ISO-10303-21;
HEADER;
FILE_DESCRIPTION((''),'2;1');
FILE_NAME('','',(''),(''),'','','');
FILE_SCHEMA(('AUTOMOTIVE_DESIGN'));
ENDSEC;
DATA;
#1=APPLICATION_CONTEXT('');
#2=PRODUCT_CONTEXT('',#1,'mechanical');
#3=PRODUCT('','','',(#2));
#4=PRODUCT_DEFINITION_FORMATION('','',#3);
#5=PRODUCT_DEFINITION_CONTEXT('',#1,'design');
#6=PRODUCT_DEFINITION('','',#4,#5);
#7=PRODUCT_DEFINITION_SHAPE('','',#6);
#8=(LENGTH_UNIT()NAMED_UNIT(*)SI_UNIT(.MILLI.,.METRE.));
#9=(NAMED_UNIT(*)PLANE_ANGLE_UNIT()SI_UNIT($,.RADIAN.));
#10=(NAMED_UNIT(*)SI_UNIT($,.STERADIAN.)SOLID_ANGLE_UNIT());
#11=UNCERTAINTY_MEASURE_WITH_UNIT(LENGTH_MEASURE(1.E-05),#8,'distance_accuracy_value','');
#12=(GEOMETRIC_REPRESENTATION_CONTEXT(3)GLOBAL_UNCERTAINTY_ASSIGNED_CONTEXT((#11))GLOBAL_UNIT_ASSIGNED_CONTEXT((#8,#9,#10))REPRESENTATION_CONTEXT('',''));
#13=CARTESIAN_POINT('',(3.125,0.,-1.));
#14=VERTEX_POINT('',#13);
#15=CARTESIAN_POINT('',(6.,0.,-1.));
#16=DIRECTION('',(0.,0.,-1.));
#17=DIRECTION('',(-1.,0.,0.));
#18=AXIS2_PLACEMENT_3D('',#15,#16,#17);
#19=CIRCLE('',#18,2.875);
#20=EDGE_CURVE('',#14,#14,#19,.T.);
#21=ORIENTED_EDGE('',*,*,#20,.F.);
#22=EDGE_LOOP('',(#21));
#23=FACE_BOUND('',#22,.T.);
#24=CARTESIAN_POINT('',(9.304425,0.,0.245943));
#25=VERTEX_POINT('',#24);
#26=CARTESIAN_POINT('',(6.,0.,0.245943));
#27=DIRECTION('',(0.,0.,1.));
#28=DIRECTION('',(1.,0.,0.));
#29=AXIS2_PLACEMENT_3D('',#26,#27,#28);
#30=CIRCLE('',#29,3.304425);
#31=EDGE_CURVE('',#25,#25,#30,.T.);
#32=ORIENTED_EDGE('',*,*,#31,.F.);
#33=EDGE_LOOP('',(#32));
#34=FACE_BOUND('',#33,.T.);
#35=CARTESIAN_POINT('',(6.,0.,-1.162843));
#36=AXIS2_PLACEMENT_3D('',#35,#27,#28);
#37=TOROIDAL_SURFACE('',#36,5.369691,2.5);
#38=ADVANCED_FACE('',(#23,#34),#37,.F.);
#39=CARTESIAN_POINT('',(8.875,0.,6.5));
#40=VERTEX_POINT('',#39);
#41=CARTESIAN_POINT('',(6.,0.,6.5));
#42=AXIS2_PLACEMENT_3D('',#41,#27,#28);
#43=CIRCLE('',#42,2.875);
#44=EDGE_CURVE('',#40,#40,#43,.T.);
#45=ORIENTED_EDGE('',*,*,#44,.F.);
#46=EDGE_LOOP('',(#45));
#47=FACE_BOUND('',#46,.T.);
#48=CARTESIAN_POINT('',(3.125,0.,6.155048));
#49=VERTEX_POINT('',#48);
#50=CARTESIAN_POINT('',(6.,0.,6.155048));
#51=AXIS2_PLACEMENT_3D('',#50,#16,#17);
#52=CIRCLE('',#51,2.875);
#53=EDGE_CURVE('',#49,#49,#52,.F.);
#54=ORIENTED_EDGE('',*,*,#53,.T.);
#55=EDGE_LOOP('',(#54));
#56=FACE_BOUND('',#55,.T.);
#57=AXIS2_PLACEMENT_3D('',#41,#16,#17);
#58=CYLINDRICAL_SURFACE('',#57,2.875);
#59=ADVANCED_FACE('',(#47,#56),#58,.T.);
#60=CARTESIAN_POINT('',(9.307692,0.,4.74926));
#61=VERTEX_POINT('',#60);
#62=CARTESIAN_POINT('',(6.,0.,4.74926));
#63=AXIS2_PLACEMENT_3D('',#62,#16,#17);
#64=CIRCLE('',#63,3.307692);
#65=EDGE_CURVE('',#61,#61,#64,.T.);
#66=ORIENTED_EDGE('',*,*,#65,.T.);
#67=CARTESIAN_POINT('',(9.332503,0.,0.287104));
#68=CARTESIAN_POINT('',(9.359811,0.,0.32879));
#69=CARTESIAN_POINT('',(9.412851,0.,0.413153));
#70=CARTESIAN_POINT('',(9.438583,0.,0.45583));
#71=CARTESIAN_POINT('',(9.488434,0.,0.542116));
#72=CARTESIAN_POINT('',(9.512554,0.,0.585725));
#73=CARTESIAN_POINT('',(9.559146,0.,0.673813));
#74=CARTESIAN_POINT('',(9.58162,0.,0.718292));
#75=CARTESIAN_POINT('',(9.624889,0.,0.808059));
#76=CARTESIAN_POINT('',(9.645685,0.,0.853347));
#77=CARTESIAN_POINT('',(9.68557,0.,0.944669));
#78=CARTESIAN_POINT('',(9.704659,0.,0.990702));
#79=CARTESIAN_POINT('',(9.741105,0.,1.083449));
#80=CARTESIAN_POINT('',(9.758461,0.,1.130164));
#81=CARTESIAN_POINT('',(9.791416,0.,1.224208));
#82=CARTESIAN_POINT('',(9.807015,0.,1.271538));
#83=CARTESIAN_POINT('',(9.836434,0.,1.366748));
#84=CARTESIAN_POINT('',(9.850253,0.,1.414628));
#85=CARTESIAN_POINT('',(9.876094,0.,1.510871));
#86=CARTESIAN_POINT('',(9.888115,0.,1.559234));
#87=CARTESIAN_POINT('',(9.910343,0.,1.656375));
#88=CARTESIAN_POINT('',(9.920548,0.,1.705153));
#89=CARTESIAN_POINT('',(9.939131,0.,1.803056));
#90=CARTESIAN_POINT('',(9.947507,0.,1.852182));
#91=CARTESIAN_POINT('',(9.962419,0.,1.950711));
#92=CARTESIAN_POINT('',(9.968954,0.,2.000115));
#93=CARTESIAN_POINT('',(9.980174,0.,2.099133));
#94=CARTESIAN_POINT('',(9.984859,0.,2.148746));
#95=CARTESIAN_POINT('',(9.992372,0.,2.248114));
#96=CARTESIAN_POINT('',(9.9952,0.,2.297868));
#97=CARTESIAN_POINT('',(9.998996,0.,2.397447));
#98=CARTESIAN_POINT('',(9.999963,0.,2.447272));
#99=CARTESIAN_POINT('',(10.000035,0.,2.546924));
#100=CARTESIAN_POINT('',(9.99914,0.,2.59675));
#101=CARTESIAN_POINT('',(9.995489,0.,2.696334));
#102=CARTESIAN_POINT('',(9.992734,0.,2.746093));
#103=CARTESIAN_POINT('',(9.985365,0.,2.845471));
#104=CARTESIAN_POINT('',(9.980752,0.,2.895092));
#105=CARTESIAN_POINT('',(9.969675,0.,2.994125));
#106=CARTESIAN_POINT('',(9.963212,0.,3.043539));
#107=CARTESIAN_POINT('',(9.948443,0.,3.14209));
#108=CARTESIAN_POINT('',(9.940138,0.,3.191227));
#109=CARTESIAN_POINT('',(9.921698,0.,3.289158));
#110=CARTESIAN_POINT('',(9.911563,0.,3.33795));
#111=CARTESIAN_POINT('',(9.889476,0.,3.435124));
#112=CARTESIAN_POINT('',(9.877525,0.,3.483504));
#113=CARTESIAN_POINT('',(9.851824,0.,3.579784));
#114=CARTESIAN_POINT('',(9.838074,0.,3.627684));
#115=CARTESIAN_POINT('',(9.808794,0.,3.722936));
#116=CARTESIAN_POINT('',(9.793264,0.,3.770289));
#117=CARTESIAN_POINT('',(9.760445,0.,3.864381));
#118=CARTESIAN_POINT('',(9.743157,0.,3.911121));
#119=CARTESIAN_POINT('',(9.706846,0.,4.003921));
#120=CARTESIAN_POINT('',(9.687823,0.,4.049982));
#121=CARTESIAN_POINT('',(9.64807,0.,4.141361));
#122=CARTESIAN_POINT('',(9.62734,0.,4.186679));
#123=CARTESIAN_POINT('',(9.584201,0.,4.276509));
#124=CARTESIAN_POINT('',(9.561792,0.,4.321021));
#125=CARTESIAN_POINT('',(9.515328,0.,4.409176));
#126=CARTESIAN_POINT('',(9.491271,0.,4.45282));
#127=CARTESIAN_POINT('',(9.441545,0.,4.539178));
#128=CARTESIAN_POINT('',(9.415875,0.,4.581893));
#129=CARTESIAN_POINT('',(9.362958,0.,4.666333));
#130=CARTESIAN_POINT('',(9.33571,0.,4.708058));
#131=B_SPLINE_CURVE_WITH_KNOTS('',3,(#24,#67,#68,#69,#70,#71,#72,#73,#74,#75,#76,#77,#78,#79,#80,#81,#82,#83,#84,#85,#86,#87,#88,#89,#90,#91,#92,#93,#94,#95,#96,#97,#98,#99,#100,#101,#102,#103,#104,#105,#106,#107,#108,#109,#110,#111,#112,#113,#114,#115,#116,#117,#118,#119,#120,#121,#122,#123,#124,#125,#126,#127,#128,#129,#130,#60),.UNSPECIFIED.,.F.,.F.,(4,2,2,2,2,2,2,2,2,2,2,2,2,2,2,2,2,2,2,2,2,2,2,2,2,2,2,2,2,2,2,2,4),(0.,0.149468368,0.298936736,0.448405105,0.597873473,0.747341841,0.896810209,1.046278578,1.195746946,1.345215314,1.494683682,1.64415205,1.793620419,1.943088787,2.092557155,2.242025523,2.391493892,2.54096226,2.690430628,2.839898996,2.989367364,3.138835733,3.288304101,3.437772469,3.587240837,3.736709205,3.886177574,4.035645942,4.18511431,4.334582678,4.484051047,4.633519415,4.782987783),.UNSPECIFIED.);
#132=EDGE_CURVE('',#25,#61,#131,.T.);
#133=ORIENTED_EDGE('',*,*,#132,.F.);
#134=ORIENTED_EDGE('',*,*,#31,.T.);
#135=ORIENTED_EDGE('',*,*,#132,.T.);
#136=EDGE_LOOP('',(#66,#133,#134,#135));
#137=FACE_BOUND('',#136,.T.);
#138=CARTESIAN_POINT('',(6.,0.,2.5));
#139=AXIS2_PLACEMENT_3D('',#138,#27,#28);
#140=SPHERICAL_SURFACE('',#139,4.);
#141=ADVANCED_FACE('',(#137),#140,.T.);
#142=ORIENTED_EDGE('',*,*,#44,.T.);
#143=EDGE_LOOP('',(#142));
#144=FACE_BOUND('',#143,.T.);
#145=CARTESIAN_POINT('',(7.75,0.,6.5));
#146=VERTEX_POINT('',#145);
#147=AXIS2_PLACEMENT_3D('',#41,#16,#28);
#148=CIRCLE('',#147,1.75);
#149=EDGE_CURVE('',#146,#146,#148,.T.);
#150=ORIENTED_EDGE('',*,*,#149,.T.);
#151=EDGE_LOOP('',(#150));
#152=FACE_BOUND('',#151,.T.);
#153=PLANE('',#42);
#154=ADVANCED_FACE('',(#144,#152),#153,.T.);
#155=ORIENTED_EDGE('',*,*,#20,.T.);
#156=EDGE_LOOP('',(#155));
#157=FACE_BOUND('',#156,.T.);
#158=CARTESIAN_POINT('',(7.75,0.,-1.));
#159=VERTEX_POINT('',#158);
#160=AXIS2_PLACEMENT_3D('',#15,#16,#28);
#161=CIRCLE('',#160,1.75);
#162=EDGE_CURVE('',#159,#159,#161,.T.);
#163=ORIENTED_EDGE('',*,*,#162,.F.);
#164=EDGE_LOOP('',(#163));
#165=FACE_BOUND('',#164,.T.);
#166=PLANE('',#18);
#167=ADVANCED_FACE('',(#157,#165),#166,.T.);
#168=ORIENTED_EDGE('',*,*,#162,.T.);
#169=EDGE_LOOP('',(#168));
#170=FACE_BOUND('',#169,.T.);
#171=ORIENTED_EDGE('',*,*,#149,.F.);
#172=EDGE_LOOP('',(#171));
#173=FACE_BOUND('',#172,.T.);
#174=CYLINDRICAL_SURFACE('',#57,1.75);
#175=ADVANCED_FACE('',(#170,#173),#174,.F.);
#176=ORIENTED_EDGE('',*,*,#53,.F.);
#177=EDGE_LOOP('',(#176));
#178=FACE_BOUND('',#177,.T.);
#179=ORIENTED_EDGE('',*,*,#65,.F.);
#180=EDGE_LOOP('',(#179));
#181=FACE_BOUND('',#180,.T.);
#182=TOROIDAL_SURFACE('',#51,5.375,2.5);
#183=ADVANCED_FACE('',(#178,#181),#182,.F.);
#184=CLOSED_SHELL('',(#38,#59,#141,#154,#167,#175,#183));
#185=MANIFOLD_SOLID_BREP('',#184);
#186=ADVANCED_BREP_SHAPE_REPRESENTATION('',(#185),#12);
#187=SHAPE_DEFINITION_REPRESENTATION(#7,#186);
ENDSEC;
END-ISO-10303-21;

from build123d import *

# Parameters (mm, degrees)
SKETCH2_R           = 2.875
BOSS_EXTRUDE1_DEPTH = 0.71892557
BOSS_EXTRUDE2_START = 1.218925567
SKETCH3_R           = 2.875
BOSS_EXTRUDE2_DEPTH = 1.218925567
SKETCH4_R           = 1.75
CUT_EXTRUDE1_DEPTH  = 14.12440475
FILLET1_R           = 2.5


with BuildPart() as part:
    # Sketch1 → Revolve1 (revolve)
    with BuildSketch(Plane(origin=(0, 0, 0), x_dir=(1, 0, 0), z_dir=(0, 1, 0))):
        with BuildLine():
            Line((8.875, 0.281074433), (6, 0.281074433))
            Line((6, 0.281074433), (6, -5.281074433))
            Line((6, -5.281074433), (8.875, -5.281074433))
            ThreePointArc((8.875, -5.281074433), (10, -2.5), (8.875, 0.281074433))
        make_face()
    revolve(axis=Axis((6, 0, -0.281074433), (0, 0, 1)))

    # Sketch2 → Boss-Extrude1 (add)
    with BuildSketch(Plane(origin=(0, 0, -0.281074433), x_dir=(-1, 0, 0), z_dir=(0, 0, -1))):
        with Locations(Location((-6, 0, 0), (0, 0, 180))):
            Circle(SKETCH2_R)
    extrude(amount=BOSS_EXTRUDE1_DEPTH)

    # Sketch3 → Boss-Extrude2 (add)
    with BuildSketch(Plane.XY.offset(5.281074433).offset(BOSS_EXTRUDE2_START)):
        with Locations((6, 0)):
            Circle(SKETCH3_R)
    extrude(amount=-BOSS_EXTRUDE2_DEPTH)

    # Sketch4 → Cut-Extrude1 (cut, through all)
    with BuildSketch(Plane(origin=(0, 0, -1.000000003), x_dir=(-1, 0, 0), z_dir=(0, 0, -1))):
        with Locations(Location((-6, 0, 0), (0, 0, 180))):
            Circle(SKETCH4_R)
    extrude(amount=-CUT_EXTRUDE1_DEPTH, mode=Mode.SUBTRACT)

    # Fillet1
    # the kernel refuses this fillet: 2.5 mm, written as the material it adds along each edge
    with BuildSketch(Plane(origin=(6, 0, 5.281074433), x_dir=(1, 0, 0), z_dir=(0, -1, 0))) as fillet1_piece_1:
        with BuildLine():
            CenterArc((5.375, 0.873973447), FILLET1_R, 180, 34.216051131)
            Line((2.875, 0.873973447), (2.825, 0.873973447))
            Line((2.825, 0.873973447), (2.825, 0))
            Line((2.825, 0), (2.8390625, -0.03476343))
            ThreePointArc((2.8390625, -0.03476343), (3.063976775, -0.288175252), (3.266346154, -0.559929952))
            Line((3.266346154, -0.559929952), (3.307692308, -0.531814199))
        make_face()
    revolve(axis=Axis((6, 0, 5.281074433), (0, 0, 1)))
    with BuildSketch(Plane(origin=(6, 0, -0.281074433), x_dir=(1, 0, 0), z_dir=(0, -1, 0))) as fillet1_piece_2:
        with BuildLine():
            CenterArc((5.369690775, -0.881768859), FILLET1_R, 145.700811221, 30.56445132)
            Line((2.875, -0.71892557), (2.825106184, -0.715668704))
            ThreePointArc((2.825106184, -0.715668704), (2.825, -0.359462785), (2.825, 0))
            Line((2.825, 0), (2.8390625, 0.03476343))
            ThreePointArc((2.8390625, 0.03476343), (3.062167338, 0.285952954), (3.263119779, 0.55519274))
            Line((3.263119779, 0.55519274), (3.304425092, 0.527017022))
        make_face()
    revolve(axis=Axis((6, 0, -0.281074433), (0, 0, 1)))


solid = part.part
